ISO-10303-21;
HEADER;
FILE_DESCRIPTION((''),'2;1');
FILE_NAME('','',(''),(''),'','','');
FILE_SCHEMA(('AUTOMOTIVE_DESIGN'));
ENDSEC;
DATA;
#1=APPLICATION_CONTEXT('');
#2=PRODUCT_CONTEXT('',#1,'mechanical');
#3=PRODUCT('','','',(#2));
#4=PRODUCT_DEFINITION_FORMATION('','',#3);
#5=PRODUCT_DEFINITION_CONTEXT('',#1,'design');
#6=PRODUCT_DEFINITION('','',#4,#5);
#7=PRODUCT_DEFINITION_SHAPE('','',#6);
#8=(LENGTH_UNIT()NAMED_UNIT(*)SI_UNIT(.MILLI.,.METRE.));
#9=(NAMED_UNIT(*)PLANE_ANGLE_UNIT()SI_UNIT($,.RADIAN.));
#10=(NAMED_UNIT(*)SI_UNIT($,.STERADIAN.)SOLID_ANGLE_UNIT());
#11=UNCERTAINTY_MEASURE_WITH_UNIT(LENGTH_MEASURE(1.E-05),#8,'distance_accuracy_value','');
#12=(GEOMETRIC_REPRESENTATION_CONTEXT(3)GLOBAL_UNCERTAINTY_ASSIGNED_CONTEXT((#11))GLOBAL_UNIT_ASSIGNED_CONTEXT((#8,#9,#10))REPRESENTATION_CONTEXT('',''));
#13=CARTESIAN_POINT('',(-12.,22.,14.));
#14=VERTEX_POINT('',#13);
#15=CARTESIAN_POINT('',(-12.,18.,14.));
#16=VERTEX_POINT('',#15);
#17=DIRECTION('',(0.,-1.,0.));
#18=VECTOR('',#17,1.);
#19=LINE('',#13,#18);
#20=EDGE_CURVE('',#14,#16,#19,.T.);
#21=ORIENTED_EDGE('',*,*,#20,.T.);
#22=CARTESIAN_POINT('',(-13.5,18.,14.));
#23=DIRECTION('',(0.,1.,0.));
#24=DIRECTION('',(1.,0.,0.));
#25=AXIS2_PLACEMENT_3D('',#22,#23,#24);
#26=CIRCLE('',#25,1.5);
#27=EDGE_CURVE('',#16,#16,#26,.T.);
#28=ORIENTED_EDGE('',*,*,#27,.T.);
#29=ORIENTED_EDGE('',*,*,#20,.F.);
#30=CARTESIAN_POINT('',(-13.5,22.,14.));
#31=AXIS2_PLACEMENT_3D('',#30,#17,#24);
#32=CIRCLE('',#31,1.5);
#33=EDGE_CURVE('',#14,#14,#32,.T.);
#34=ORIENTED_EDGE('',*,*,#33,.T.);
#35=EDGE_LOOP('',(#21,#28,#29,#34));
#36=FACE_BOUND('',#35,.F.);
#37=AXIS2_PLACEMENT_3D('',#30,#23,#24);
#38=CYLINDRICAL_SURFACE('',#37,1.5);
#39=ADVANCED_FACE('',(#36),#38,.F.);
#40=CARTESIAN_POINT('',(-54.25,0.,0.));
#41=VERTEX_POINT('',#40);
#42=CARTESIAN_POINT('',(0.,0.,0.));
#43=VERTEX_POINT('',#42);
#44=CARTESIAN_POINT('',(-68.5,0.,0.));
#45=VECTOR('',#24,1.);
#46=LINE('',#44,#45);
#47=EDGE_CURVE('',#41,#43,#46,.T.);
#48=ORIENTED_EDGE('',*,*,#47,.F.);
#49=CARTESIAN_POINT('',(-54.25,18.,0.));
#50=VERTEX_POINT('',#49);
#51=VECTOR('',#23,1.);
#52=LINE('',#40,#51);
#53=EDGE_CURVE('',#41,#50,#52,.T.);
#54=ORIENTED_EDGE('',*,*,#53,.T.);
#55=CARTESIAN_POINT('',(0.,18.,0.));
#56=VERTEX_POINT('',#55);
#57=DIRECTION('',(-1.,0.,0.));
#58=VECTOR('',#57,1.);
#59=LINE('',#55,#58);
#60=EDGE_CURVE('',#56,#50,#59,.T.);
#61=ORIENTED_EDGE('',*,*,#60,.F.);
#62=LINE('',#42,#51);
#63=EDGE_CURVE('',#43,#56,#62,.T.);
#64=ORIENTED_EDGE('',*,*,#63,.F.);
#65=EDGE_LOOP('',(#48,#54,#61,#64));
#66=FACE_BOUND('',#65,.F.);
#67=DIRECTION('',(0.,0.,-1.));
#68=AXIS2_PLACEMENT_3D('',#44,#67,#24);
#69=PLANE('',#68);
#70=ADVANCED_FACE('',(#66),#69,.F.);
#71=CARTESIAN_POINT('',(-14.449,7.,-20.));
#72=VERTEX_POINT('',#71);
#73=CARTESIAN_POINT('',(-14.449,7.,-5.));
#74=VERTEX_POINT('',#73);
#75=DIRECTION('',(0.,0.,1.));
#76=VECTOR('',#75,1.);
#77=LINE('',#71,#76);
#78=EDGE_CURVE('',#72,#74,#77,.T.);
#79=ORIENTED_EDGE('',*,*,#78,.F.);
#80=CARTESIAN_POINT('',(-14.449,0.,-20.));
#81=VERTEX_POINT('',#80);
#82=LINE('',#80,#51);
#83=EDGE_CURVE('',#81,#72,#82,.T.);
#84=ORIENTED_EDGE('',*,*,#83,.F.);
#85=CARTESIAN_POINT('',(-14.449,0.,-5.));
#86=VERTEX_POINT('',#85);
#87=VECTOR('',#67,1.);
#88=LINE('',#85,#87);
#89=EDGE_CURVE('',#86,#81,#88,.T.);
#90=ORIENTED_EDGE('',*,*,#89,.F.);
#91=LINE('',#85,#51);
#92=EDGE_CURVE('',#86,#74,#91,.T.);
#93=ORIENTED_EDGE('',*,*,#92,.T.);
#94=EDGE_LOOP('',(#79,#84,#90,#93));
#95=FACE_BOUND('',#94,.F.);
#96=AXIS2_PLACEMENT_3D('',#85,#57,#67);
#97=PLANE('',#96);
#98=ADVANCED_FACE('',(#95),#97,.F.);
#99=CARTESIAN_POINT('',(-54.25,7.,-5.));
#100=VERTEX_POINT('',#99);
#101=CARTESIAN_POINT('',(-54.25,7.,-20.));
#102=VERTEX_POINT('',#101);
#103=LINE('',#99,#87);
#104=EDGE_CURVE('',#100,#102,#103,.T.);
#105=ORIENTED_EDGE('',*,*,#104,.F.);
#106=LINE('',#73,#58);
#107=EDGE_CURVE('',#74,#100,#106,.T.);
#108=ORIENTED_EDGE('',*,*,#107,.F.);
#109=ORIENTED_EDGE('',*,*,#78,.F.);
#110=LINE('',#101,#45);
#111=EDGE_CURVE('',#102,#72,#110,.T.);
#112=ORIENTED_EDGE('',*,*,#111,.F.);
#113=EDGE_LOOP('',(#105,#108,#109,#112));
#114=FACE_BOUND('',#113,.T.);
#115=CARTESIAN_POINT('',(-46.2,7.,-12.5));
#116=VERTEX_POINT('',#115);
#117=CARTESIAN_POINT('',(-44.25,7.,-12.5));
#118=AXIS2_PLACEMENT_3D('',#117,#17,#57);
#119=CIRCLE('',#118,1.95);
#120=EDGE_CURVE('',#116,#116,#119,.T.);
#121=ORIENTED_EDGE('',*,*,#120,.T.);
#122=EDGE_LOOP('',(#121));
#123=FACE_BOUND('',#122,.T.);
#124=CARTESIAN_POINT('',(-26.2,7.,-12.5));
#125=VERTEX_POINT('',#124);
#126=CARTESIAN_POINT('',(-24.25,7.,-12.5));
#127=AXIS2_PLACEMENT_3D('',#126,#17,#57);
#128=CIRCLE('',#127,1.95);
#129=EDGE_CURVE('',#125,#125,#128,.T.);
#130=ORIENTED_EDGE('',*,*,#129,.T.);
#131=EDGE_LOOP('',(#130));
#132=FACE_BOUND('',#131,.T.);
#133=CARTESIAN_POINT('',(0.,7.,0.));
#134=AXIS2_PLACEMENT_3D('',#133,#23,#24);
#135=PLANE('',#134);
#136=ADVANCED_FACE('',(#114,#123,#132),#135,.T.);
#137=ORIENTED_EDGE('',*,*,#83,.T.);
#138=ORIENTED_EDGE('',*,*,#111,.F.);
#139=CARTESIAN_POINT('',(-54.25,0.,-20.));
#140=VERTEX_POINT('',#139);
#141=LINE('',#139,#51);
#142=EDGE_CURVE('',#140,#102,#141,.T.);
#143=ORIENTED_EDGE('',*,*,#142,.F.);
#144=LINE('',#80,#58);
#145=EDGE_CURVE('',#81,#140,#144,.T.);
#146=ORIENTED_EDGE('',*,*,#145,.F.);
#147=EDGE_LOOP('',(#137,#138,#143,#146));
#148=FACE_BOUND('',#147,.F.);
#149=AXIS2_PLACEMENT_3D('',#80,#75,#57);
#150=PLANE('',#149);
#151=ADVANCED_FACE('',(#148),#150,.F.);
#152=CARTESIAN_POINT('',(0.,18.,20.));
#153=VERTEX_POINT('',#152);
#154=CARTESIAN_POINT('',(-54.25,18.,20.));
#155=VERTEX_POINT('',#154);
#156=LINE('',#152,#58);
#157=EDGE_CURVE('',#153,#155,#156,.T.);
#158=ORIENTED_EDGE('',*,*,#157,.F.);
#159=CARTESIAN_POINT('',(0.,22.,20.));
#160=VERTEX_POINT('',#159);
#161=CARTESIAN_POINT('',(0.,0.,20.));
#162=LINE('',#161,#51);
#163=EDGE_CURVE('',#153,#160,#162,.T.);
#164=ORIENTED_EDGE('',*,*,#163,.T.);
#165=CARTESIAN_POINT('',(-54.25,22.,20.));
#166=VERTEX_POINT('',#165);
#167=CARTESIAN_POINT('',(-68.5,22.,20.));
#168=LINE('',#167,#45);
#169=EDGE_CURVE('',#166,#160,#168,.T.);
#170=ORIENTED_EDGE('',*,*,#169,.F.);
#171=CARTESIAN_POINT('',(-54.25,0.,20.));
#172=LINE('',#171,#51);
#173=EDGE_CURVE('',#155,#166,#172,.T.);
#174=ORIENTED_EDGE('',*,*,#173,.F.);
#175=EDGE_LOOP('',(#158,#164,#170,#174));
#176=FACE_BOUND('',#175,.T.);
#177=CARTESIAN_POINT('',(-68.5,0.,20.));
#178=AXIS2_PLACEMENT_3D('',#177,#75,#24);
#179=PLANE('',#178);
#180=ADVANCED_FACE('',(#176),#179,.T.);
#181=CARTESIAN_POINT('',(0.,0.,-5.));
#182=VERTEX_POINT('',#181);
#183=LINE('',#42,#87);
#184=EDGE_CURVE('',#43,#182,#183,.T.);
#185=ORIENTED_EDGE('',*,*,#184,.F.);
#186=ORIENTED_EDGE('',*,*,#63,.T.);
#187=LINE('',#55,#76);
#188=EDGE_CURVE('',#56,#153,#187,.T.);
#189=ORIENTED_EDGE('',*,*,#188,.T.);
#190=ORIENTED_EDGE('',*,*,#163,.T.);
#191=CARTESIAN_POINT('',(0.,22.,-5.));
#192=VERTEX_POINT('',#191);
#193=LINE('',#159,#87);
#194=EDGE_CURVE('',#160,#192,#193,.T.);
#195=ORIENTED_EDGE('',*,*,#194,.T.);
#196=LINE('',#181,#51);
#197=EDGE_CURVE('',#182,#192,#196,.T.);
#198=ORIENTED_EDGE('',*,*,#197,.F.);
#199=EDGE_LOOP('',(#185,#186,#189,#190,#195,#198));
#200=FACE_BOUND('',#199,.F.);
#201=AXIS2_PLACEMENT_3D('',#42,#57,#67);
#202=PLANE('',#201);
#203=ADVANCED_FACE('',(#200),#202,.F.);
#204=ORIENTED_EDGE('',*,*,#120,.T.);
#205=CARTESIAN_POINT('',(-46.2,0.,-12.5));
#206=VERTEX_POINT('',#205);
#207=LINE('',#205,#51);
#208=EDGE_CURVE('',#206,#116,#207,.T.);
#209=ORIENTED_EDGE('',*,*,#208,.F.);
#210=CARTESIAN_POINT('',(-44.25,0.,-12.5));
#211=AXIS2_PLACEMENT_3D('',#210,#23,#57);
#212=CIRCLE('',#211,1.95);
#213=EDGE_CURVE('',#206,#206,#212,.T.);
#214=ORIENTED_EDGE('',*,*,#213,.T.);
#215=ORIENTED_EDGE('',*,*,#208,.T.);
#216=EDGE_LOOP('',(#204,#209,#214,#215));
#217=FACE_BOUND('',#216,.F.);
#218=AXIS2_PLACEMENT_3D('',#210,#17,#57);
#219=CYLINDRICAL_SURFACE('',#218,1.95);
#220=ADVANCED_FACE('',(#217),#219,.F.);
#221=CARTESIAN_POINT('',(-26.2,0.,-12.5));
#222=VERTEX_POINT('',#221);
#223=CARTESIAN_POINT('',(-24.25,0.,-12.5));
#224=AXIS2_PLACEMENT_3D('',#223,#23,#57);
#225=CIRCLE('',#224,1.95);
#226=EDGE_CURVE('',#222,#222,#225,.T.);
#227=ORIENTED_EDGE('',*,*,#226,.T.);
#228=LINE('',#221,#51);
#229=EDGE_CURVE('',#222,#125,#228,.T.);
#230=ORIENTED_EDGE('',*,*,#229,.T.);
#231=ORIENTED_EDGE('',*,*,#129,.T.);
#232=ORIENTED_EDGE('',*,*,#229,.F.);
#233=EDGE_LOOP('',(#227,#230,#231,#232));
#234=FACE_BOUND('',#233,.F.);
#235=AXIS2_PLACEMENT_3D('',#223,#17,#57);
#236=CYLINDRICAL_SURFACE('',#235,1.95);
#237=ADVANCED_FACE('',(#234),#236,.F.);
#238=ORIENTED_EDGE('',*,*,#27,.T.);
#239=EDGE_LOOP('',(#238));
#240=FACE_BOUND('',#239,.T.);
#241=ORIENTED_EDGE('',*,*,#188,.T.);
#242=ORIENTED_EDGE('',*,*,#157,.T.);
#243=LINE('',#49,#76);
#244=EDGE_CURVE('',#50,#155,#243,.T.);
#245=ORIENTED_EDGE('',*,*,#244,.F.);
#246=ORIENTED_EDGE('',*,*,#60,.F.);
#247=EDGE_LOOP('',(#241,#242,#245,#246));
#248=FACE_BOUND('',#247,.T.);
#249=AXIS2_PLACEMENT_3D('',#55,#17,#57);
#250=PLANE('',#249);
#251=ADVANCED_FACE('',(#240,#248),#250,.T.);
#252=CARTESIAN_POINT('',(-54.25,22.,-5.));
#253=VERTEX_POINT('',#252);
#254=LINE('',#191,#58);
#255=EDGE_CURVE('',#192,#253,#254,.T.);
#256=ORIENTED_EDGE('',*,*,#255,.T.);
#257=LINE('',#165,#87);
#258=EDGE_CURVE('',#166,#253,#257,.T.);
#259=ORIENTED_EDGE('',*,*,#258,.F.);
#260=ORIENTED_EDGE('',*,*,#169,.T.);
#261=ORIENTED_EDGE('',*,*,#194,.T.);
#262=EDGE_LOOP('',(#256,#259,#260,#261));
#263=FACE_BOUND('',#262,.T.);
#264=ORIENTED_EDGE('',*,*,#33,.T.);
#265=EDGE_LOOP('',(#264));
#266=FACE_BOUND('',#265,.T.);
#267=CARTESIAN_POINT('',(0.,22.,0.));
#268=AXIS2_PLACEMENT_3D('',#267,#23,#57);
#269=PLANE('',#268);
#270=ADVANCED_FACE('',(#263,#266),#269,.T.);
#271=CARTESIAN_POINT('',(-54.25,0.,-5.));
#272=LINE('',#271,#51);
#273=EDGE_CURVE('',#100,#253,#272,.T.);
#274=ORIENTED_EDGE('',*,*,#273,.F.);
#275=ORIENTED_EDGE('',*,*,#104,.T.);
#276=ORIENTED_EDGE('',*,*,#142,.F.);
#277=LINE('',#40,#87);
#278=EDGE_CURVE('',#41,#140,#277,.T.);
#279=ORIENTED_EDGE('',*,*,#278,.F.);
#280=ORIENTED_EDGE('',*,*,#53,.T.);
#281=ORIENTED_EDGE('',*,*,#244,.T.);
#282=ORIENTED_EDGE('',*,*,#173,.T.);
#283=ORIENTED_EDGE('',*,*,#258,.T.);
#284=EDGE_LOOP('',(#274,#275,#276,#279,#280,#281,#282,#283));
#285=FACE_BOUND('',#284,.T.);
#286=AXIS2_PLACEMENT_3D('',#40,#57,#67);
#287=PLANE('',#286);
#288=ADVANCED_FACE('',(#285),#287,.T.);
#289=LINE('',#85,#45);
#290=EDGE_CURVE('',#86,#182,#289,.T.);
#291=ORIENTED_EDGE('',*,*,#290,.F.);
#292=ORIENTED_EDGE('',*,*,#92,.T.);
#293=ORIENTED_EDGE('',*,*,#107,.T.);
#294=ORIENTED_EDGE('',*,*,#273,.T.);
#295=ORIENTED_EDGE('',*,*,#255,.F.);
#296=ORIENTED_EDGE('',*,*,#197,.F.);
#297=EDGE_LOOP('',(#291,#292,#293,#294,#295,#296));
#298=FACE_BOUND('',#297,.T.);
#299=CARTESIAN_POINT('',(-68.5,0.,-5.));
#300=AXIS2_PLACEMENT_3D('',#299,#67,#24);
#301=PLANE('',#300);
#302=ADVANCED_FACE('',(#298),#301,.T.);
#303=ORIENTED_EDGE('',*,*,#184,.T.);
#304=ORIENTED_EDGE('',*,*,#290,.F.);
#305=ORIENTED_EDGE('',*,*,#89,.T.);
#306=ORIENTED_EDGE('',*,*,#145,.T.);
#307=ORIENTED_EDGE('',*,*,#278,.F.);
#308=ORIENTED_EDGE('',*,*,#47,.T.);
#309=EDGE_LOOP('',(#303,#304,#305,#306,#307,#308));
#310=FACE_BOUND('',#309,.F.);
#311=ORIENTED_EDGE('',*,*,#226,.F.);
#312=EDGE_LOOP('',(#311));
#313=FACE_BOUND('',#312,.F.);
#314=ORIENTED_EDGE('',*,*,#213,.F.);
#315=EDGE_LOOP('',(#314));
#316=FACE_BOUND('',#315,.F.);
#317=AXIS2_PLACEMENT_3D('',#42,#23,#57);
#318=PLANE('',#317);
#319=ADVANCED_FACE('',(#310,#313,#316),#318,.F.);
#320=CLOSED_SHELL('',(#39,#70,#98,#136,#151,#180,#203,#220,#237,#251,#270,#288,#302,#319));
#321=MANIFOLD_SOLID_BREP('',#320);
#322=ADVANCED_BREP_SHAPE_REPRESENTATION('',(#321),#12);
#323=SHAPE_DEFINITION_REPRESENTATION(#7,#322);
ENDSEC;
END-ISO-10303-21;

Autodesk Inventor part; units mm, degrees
ref_plane "YZ Plane" through (0, 0, 0) normal (1, 0, 0) x (0, 1, 0)
ref_plane "XZ Plane" through (0, 0, 0) normal (0, 1, 0) x (-1, 0, 0)
ref_plane "XY Plane" through (0, 0, 0) normal (0, 0, 1) x (1, 0, 0)
sketch "Эскиз1" plane through (0, 0, 0) normal (0, 1, 0) x (-1, 0, 0)
  circle A0 centre (24.25, -12.5) radius 1.95
  circle A1 centre (44.25, -12.5) radius 1.95
  line L0 (68.5, 0) -> (0, 0)
  line L1 (0, 0) -> (0, -5)
  line L2 (14.449, -5) -> (0, -5)
  line L3 (14.449, -5) -> (14.449, -20)
  line L4 (14.449, -20) -> (54.25, -20)
  line L5 (54.25, -5) -> (54.25, -20)
  line L6 (68.5, -5) -> (54.25, -5)
  line L7 (68.5, 0) -> (68.5, -5)
  point P0 (-5.75, 0)
extrude "Выдавливание1" add sketch "Эскиз1" along normal blind 22
sketch "Эскиз2" plane through (-68.5, 0, 0) normal (0, 0, 1) x (1, 0, 0)
  line L0 (0, 0) -> (0, 22) projected
  line L1 (0, 22) -> (68.5, 22) projected
  line L2 (68.5, 0) -> (68.5, 22) projected
  line L3 (0, 22) -> (68.5, 22)
  line L4 (68.5, 22) -> (68.5, 18)
  line L5 (68.5, 18) -> (0, 18)
  line L6 (0, 18) -> (0, 22)
  dimension "d2" = 4
extrude "Выдавливание2" add sketch "Эскиз2" along normal blind 20
sketch "Эскиз3" plane through (0, 22, 0) normal (0, 1, 0) x (1, 0, 0)
  line L0 (0, 5) -> (-14.449, 5) projected
  line L1 (-54.25, 20) -> (-14.449, 20)
  line L2 (-14.449, 20) -> (-14.449, 5)
  line L3 (-14.449, 5) -> (-54.25, 5)
  line L4 (-54.25, 5) -> (-54.25, 20)
  point P0 (0, 0)
extrude "Выдавливание3" cut sketch "Эскиз3" against normal blind 15
sketch "Эскиз4" plane through (0, 22, 0) normal (0, 1, 0) x (1, 0, 0)
  line L0 (-68.5, -20) -> (0, -20) projected
  line L1 (0, -20) -> (-13.5, -20)
  line L2 (-13.5, -20) -> (-13.5, -14)
  line L3 (-13.5, -14) -> (0, -14)
  line L4 (0, -14) -> (0, -20)
  circle A0 centre (-13.5, -14) radius 1.5
  point P0 (0, 0)
  dimension "d7" = 13.5
  dimension "d8" = 6
  dimension "d9" = 3
extrude "Выдавливание4" cut sketch "Эскиз4" against normal blind 15 contours A0 L3 L2 | L2 L3 A0
move faces "Перенос1" translate (14.25, 0, 0) faces at (-68.5, 13.3333, -3.3333)
properties part number "КВ33.044.703 - Стойка оптического датчика оси Y"
